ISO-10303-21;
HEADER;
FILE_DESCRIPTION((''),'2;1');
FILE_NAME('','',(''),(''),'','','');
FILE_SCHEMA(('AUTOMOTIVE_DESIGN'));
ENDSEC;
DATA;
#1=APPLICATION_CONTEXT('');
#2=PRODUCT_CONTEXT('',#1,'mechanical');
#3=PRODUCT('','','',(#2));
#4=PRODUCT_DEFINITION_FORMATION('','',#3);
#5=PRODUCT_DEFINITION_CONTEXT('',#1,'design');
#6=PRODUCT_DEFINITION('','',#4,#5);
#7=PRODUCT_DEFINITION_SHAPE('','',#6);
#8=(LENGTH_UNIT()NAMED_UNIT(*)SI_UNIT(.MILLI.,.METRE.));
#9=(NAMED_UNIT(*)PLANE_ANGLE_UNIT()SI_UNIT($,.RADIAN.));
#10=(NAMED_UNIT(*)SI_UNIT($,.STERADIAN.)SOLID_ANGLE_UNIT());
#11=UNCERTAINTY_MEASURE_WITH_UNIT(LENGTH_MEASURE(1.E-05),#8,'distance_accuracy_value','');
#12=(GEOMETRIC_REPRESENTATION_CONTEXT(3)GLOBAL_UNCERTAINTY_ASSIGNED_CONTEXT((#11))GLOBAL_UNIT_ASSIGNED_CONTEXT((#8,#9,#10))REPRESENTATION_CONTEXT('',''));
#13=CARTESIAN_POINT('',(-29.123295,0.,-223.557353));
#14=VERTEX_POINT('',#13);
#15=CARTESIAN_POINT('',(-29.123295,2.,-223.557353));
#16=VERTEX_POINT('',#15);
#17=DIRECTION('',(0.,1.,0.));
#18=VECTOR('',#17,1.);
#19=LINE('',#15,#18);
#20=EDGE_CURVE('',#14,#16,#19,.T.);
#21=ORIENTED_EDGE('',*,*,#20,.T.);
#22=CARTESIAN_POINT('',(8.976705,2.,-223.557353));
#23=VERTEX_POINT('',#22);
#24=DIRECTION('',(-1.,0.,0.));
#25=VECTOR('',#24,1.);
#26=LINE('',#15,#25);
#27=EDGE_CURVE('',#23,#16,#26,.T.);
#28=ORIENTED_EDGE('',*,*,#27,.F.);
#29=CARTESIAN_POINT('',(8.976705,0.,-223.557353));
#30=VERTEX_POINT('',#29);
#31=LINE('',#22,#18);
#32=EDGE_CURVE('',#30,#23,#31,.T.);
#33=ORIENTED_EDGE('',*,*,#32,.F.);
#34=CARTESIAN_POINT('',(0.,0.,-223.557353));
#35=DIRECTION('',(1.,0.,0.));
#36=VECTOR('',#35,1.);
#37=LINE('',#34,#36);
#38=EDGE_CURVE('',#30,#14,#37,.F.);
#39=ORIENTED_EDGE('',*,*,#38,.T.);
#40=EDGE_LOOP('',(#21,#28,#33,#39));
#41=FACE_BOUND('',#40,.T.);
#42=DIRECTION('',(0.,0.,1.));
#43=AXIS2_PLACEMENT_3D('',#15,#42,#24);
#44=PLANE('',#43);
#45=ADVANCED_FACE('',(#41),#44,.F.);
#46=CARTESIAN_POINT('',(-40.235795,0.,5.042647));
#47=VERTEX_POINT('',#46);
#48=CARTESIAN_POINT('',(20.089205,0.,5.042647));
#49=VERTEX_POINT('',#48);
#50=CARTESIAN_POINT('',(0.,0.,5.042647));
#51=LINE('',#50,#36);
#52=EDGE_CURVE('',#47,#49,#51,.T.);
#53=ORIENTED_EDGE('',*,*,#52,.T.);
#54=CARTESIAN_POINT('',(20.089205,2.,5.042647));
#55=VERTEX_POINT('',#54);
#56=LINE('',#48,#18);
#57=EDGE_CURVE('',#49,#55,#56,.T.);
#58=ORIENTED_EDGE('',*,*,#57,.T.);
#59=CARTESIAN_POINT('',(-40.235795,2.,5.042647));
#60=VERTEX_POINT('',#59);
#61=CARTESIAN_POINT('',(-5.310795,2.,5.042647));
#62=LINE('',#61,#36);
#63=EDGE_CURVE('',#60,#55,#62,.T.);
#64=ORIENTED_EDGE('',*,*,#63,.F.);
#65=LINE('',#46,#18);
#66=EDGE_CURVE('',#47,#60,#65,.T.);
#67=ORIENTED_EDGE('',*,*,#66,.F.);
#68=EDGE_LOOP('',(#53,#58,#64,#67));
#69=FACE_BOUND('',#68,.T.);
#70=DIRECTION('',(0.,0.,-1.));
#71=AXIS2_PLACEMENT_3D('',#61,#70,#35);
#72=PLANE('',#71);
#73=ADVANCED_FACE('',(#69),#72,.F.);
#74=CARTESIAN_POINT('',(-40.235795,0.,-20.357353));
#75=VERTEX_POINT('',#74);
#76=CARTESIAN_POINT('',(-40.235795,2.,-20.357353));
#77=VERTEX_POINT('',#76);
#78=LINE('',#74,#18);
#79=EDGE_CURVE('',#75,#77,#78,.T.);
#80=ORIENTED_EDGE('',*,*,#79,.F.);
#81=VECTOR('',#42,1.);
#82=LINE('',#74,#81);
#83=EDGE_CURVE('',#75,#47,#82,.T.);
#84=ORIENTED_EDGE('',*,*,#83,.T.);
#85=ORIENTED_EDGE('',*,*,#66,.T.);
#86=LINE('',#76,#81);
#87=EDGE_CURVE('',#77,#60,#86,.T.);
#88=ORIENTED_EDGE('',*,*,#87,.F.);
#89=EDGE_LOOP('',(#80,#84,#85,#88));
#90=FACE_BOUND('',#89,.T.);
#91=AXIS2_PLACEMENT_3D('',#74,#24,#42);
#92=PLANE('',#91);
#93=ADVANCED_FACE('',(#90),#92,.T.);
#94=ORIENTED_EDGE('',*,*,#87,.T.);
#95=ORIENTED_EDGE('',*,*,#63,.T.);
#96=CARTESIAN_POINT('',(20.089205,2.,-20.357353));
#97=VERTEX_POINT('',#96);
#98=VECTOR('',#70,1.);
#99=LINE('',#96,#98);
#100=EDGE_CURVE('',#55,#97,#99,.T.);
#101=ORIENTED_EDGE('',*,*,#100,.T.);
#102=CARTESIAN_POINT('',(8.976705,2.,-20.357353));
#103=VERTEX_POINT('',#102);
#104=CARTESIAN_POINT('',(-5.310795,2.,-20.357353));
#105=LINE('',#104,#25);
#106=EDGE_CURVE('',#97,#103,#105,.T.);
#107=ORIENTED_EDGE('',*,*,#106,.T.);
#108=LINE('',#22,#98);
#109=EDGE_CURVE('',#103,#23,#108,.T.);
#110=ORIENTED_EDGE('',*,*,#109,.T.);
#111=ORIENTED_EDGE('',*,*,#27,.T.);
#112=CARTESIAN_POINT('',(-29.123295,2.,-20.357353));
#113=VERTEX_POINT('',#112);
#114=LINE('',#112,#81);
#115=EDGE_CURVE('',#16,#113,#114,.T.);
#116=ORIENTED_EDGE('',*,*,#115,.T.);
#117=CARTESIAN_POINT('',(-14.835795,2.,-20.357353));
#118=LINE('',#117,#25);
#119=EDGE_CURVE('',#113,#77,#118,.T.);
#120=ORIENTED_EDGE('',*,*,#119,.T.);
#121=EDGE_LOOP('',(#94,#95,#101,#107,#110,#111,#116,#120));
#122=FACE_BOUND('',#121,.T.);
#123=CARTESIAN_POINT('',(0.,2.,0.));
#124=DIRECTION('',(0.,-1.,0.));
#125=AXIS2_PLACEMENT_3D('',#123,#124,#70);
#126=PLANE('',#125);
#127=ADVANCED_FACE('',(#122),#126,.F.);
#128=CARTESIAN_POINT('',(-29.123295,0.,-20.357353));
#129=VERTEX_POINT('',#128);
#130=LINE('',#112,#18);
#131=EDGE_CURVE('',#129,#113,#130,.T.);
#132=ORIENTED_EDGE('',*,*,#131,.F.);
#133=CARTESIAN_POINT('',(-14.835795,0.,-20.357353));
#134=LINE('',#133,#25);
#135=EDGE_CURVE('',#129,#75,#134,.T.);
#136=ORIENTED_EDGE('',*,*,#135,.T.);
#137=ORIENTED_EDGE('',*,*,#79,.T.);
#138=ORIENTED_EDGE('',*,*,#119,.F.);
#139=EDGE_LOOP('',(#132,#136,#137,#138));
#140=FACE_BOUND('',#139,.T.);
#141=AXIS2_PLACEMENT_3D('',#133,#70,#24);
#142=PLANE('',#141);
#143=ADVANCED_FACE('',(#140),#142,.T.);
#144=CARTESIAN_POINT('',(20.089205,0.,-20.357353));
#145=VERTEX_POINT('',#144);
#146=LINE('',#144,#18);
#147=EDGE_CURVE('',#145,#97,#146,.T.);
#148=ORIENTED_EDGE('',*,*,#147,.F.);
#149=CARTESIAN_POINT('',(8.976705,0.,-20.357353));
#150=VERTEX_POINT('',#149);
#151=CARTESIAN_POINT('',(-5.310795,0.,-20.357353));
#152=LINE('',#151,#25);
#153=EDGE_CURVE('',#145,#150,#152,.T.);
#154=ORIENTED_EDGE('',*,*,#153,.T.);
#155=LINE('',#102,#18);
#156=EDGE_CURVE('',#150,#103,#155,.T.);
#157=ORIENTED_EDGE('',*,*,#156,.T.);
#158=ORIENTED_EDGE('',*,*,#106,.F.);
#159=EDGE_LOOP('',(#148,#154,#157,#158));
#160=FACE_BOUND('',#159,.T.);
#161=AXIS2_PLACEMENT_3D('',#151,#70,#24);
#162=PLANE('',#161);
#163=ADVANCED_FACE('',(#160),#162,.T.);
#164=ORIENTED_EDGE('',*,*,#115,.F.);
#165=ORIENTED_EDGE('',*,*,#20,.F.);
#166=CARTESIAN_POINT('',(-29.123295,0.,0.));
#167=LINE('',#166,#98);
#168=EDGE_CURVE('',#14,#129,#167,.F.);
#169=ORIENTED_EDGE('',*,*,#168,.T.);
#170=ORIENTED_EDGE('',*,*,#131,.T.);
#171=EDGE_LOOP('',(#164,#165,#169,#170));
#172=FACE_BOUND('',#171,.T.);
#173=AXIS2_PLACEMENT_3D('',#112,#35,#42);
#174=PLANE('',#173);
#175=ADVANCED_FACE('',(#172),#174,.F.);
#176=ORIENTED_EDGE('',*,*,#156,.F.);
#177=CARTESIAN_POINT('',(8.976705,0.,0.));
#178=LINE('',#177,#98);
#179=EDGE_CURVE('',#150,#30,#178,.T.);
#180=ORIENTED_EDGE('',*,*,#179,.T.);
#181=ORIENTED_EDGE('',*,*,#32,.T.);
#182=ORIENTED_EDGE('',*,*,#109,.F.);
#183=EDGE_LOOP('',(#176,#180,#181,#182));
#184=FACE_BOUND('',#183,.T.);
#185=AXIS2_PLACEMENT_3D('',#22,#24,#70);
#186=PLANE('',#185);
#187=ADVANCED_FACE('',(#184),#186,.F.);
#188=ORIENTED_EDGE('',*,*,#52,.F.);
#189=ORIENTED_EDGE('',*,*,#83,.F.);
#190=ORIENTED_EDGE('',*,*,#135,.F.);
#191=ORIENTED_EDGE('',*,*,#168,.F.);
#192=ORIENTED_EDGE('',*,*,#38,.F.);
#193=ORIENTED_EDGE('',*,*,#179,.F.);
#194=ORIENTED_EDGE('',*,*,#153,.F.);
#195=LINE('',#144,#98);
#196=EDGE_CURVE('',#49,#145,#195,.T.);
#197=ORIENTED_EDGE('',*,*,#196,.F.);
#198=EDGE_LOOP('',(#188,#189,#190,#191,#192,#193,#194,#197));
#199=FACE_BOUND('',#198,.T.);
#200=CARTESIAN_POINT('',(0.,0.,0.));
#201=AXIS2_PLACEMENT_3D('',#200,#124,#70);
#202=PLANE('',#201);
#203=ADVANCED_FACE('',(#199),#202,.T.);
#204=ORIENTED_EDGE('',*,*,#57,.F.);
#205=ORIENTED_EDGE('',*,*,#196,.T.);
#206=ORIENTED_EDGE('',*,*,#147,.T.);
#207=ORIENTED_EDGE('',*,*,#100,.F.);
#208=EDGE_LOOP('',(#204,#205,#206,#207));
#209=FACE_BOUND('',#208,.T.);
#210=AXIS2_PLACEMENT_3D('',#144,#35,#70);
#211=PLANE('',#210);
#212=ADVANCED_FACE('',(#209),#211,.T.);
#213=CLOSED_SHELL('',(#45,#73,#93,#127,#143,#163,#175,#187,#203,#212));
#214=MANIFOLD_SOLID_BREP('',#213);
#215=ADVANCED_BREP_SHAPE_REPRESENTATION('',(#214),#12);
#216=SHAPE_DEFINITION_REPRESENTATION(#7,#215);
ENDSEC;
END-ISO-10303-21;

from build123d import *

# Parameters (mm, degrees)
BOSS_EXTRUDE1_DEPTH = 2
SKETCH8_W           = 25.4
SKETCH8_H           = 25.4
BOSS_EXTRUDE2_DEPTH = 2


with BuildPart() as part:
    # Sketch1 → Boss-Extrude1 (new body)
    with BuildSketch(Plane(origin=(0, 0, 0), x_dir=(1, 0, 0), z_dir=(0, 1, 0))):
        Polygon((-29.123295379, 223.557352941), (8.976704621, 223.557352941), (8.976704621, 20.357352941), (-5.310795379, 20.357352941), (-5.310795379, -5.042647059), (-14.835795379, -5.042647059), (-14.835795379, 20.357352941), (-29.123295379, 20.357352941), align=None)
    extrude(amount=BOSS_EXTRUDE1_DEPTH)

    # Sketch8 → Boss-Extrude2 (add)
    with BuildSketch(Plane(origin=(0, 2, 0), x_dir=(1, 0, 0), z_dir=(0, 1, 0))):
        with Locations((-27.535795379, 7.657352941)):
            Rectangle(SKETCH8_W, SKETCH8_H)
        with Locations((7.389204621, 7.657352941)):
            Rectangle(SKETCH8_W, SKETCH8_H)
    extrude(amount=-BOSS_EXTRUDE2_DEPTH)


solid = part.part
